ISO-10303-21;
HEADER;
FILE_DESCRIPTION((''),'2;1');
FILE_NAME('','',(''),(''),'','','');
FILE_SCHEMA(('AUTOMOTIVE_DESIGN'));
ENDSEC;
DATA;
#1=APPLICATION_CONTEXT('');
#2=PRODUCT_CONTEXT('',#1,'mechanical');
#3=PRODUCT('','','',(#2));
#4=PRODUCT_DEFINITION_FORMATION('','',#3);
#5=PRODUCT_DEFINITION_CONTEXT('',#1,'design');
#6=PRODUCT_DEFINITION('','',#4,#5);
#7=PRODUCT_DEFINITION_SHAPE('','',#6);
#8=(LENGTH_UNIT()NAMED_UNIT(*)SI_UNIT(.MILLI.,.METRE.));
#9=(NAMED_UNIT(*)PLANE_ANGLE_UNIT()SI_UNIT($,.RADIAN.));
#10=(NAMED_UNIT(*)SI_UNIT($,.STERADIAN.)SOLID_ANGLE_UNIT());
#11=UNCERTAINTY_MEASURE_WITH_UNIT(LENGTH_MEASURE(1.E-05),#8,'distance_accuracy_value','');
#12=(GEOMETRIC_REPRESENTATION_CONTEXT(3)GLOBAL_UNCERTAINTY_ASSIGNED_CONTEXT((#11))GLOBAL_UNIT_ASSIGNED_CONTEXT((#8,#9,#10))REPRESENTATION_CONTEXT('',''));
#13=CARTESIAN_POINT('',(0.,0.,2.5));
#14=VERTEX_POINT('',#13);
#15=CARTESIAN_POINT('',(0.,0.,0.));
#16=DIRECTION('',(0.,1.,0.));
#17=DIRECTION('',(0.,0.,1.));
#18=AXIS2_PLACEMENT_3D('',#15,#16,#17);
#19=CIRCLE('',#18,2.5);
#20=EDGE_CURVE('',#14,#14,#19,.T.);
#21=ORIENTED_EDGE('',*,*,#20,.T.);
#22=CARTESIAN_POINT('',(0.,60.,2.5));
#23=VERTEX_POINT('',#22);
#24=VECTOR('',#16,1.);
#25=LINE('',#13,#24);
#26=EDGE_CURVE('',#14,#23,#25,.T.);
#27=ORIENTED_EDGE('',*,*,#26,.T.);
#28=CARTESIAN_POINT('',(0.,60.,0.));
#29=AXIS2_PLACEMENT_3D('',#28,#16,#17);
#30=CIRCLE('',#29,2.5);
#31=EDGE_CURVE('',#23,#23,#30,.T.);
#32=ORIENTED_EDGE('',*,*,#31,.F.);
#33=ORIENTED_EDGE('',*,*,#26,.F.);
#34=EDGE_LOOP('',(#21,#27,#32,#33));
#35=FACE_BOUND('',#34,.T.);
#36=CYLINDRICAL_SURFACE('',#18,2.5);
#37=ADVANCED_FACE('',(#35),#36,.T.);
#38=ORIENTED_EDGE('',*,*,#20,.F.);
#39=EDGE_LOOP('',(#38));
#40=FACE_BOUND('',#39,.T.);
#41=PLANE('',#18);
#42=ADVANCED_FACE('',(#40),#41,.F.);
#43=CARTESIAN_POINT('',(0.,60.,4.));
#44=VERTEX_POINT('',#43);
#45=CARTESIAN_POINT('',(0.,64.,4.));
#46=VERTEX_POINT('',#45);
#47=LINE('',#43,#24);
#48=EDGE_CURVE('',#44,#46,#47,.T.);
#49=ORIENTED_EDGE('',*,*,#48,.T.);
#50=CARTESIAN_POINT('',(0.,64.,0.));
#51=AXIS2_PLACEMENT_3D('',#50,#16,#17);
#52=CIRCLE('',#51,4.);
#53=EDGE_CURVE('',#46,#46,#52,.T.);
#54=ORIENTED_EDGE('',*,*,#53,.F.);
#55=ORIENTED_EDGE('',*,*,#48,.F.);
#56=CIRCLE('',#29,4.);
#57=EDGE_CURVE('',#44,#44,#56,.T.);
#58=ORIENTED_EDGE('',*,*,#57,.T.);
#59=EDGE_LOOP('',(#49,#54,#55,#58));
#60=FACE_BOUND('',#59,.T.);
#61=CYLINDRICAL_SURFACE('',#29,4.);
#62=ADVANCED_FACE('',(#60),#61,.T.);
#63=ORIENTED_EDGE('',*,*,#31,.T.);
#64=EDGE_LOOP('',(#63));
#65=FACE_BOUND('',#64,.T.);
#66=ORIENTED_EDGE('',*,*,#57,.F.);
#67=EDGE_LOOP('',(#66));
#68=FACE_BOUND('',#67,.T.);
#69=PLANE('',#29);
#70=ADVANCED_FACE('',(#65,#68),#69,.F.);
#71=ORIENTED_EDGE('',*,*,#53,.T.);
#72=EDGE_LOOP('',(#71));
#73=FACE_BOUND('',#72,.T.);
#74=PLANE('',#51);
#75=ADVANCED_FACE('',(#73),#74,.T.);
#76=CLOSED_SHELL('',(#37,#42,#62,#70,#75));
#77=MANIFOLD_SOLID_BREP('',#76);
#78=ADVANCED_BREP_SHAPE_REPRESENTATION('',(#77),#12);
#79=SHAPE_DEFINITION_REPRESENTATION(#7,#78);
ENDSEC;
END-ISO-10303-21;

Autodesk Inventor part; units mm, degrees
ref_plane "YZ Plane" through (0, 0, 0) normal (1, 0, 0) x (0, 1, 0)
ref_plane "XZ Plane" through (0, 0, 0) normal (0, 1, 0) x (-1, 0, 0)
ref_plane "XY Plane" through (0, 0, 0) normal (0, 0, 1) x (1, 0, 0)
sketch "Skizze1" plane through (0, 0, 0) normal (1, 0, 0) x (0, 1, 0)
  line L0 (-12.8, 0) -> (76.8, 0) projected
  line L1 (0, -0.8) -> (0, 4.8) projected
  line L2 (0, 0) -> (0, 2.5)
  line L3 (0, 2.5) -> (60, 2.5)
  line L4 (60, 2.5) -> (60, 4)
  line L5 (60, 4) -> (64, 4)
  line L6 (64, 4) -> (64, 0)
  dimension "d0" = 2.5
  dimension "d1" = 60
  dimension "d3" = 4
  dimension "d8" = 4
revolve "Umdrehung1" add sketch "Skizze1" angle 360 about axis through (0, -10, 0) along (0, 1, 0)
thread "Gewinde1" size "M5x0.8" class "6g" standard "ANSI Metric M Profile" length 24
properties part number "01-03-05 Schraube"
